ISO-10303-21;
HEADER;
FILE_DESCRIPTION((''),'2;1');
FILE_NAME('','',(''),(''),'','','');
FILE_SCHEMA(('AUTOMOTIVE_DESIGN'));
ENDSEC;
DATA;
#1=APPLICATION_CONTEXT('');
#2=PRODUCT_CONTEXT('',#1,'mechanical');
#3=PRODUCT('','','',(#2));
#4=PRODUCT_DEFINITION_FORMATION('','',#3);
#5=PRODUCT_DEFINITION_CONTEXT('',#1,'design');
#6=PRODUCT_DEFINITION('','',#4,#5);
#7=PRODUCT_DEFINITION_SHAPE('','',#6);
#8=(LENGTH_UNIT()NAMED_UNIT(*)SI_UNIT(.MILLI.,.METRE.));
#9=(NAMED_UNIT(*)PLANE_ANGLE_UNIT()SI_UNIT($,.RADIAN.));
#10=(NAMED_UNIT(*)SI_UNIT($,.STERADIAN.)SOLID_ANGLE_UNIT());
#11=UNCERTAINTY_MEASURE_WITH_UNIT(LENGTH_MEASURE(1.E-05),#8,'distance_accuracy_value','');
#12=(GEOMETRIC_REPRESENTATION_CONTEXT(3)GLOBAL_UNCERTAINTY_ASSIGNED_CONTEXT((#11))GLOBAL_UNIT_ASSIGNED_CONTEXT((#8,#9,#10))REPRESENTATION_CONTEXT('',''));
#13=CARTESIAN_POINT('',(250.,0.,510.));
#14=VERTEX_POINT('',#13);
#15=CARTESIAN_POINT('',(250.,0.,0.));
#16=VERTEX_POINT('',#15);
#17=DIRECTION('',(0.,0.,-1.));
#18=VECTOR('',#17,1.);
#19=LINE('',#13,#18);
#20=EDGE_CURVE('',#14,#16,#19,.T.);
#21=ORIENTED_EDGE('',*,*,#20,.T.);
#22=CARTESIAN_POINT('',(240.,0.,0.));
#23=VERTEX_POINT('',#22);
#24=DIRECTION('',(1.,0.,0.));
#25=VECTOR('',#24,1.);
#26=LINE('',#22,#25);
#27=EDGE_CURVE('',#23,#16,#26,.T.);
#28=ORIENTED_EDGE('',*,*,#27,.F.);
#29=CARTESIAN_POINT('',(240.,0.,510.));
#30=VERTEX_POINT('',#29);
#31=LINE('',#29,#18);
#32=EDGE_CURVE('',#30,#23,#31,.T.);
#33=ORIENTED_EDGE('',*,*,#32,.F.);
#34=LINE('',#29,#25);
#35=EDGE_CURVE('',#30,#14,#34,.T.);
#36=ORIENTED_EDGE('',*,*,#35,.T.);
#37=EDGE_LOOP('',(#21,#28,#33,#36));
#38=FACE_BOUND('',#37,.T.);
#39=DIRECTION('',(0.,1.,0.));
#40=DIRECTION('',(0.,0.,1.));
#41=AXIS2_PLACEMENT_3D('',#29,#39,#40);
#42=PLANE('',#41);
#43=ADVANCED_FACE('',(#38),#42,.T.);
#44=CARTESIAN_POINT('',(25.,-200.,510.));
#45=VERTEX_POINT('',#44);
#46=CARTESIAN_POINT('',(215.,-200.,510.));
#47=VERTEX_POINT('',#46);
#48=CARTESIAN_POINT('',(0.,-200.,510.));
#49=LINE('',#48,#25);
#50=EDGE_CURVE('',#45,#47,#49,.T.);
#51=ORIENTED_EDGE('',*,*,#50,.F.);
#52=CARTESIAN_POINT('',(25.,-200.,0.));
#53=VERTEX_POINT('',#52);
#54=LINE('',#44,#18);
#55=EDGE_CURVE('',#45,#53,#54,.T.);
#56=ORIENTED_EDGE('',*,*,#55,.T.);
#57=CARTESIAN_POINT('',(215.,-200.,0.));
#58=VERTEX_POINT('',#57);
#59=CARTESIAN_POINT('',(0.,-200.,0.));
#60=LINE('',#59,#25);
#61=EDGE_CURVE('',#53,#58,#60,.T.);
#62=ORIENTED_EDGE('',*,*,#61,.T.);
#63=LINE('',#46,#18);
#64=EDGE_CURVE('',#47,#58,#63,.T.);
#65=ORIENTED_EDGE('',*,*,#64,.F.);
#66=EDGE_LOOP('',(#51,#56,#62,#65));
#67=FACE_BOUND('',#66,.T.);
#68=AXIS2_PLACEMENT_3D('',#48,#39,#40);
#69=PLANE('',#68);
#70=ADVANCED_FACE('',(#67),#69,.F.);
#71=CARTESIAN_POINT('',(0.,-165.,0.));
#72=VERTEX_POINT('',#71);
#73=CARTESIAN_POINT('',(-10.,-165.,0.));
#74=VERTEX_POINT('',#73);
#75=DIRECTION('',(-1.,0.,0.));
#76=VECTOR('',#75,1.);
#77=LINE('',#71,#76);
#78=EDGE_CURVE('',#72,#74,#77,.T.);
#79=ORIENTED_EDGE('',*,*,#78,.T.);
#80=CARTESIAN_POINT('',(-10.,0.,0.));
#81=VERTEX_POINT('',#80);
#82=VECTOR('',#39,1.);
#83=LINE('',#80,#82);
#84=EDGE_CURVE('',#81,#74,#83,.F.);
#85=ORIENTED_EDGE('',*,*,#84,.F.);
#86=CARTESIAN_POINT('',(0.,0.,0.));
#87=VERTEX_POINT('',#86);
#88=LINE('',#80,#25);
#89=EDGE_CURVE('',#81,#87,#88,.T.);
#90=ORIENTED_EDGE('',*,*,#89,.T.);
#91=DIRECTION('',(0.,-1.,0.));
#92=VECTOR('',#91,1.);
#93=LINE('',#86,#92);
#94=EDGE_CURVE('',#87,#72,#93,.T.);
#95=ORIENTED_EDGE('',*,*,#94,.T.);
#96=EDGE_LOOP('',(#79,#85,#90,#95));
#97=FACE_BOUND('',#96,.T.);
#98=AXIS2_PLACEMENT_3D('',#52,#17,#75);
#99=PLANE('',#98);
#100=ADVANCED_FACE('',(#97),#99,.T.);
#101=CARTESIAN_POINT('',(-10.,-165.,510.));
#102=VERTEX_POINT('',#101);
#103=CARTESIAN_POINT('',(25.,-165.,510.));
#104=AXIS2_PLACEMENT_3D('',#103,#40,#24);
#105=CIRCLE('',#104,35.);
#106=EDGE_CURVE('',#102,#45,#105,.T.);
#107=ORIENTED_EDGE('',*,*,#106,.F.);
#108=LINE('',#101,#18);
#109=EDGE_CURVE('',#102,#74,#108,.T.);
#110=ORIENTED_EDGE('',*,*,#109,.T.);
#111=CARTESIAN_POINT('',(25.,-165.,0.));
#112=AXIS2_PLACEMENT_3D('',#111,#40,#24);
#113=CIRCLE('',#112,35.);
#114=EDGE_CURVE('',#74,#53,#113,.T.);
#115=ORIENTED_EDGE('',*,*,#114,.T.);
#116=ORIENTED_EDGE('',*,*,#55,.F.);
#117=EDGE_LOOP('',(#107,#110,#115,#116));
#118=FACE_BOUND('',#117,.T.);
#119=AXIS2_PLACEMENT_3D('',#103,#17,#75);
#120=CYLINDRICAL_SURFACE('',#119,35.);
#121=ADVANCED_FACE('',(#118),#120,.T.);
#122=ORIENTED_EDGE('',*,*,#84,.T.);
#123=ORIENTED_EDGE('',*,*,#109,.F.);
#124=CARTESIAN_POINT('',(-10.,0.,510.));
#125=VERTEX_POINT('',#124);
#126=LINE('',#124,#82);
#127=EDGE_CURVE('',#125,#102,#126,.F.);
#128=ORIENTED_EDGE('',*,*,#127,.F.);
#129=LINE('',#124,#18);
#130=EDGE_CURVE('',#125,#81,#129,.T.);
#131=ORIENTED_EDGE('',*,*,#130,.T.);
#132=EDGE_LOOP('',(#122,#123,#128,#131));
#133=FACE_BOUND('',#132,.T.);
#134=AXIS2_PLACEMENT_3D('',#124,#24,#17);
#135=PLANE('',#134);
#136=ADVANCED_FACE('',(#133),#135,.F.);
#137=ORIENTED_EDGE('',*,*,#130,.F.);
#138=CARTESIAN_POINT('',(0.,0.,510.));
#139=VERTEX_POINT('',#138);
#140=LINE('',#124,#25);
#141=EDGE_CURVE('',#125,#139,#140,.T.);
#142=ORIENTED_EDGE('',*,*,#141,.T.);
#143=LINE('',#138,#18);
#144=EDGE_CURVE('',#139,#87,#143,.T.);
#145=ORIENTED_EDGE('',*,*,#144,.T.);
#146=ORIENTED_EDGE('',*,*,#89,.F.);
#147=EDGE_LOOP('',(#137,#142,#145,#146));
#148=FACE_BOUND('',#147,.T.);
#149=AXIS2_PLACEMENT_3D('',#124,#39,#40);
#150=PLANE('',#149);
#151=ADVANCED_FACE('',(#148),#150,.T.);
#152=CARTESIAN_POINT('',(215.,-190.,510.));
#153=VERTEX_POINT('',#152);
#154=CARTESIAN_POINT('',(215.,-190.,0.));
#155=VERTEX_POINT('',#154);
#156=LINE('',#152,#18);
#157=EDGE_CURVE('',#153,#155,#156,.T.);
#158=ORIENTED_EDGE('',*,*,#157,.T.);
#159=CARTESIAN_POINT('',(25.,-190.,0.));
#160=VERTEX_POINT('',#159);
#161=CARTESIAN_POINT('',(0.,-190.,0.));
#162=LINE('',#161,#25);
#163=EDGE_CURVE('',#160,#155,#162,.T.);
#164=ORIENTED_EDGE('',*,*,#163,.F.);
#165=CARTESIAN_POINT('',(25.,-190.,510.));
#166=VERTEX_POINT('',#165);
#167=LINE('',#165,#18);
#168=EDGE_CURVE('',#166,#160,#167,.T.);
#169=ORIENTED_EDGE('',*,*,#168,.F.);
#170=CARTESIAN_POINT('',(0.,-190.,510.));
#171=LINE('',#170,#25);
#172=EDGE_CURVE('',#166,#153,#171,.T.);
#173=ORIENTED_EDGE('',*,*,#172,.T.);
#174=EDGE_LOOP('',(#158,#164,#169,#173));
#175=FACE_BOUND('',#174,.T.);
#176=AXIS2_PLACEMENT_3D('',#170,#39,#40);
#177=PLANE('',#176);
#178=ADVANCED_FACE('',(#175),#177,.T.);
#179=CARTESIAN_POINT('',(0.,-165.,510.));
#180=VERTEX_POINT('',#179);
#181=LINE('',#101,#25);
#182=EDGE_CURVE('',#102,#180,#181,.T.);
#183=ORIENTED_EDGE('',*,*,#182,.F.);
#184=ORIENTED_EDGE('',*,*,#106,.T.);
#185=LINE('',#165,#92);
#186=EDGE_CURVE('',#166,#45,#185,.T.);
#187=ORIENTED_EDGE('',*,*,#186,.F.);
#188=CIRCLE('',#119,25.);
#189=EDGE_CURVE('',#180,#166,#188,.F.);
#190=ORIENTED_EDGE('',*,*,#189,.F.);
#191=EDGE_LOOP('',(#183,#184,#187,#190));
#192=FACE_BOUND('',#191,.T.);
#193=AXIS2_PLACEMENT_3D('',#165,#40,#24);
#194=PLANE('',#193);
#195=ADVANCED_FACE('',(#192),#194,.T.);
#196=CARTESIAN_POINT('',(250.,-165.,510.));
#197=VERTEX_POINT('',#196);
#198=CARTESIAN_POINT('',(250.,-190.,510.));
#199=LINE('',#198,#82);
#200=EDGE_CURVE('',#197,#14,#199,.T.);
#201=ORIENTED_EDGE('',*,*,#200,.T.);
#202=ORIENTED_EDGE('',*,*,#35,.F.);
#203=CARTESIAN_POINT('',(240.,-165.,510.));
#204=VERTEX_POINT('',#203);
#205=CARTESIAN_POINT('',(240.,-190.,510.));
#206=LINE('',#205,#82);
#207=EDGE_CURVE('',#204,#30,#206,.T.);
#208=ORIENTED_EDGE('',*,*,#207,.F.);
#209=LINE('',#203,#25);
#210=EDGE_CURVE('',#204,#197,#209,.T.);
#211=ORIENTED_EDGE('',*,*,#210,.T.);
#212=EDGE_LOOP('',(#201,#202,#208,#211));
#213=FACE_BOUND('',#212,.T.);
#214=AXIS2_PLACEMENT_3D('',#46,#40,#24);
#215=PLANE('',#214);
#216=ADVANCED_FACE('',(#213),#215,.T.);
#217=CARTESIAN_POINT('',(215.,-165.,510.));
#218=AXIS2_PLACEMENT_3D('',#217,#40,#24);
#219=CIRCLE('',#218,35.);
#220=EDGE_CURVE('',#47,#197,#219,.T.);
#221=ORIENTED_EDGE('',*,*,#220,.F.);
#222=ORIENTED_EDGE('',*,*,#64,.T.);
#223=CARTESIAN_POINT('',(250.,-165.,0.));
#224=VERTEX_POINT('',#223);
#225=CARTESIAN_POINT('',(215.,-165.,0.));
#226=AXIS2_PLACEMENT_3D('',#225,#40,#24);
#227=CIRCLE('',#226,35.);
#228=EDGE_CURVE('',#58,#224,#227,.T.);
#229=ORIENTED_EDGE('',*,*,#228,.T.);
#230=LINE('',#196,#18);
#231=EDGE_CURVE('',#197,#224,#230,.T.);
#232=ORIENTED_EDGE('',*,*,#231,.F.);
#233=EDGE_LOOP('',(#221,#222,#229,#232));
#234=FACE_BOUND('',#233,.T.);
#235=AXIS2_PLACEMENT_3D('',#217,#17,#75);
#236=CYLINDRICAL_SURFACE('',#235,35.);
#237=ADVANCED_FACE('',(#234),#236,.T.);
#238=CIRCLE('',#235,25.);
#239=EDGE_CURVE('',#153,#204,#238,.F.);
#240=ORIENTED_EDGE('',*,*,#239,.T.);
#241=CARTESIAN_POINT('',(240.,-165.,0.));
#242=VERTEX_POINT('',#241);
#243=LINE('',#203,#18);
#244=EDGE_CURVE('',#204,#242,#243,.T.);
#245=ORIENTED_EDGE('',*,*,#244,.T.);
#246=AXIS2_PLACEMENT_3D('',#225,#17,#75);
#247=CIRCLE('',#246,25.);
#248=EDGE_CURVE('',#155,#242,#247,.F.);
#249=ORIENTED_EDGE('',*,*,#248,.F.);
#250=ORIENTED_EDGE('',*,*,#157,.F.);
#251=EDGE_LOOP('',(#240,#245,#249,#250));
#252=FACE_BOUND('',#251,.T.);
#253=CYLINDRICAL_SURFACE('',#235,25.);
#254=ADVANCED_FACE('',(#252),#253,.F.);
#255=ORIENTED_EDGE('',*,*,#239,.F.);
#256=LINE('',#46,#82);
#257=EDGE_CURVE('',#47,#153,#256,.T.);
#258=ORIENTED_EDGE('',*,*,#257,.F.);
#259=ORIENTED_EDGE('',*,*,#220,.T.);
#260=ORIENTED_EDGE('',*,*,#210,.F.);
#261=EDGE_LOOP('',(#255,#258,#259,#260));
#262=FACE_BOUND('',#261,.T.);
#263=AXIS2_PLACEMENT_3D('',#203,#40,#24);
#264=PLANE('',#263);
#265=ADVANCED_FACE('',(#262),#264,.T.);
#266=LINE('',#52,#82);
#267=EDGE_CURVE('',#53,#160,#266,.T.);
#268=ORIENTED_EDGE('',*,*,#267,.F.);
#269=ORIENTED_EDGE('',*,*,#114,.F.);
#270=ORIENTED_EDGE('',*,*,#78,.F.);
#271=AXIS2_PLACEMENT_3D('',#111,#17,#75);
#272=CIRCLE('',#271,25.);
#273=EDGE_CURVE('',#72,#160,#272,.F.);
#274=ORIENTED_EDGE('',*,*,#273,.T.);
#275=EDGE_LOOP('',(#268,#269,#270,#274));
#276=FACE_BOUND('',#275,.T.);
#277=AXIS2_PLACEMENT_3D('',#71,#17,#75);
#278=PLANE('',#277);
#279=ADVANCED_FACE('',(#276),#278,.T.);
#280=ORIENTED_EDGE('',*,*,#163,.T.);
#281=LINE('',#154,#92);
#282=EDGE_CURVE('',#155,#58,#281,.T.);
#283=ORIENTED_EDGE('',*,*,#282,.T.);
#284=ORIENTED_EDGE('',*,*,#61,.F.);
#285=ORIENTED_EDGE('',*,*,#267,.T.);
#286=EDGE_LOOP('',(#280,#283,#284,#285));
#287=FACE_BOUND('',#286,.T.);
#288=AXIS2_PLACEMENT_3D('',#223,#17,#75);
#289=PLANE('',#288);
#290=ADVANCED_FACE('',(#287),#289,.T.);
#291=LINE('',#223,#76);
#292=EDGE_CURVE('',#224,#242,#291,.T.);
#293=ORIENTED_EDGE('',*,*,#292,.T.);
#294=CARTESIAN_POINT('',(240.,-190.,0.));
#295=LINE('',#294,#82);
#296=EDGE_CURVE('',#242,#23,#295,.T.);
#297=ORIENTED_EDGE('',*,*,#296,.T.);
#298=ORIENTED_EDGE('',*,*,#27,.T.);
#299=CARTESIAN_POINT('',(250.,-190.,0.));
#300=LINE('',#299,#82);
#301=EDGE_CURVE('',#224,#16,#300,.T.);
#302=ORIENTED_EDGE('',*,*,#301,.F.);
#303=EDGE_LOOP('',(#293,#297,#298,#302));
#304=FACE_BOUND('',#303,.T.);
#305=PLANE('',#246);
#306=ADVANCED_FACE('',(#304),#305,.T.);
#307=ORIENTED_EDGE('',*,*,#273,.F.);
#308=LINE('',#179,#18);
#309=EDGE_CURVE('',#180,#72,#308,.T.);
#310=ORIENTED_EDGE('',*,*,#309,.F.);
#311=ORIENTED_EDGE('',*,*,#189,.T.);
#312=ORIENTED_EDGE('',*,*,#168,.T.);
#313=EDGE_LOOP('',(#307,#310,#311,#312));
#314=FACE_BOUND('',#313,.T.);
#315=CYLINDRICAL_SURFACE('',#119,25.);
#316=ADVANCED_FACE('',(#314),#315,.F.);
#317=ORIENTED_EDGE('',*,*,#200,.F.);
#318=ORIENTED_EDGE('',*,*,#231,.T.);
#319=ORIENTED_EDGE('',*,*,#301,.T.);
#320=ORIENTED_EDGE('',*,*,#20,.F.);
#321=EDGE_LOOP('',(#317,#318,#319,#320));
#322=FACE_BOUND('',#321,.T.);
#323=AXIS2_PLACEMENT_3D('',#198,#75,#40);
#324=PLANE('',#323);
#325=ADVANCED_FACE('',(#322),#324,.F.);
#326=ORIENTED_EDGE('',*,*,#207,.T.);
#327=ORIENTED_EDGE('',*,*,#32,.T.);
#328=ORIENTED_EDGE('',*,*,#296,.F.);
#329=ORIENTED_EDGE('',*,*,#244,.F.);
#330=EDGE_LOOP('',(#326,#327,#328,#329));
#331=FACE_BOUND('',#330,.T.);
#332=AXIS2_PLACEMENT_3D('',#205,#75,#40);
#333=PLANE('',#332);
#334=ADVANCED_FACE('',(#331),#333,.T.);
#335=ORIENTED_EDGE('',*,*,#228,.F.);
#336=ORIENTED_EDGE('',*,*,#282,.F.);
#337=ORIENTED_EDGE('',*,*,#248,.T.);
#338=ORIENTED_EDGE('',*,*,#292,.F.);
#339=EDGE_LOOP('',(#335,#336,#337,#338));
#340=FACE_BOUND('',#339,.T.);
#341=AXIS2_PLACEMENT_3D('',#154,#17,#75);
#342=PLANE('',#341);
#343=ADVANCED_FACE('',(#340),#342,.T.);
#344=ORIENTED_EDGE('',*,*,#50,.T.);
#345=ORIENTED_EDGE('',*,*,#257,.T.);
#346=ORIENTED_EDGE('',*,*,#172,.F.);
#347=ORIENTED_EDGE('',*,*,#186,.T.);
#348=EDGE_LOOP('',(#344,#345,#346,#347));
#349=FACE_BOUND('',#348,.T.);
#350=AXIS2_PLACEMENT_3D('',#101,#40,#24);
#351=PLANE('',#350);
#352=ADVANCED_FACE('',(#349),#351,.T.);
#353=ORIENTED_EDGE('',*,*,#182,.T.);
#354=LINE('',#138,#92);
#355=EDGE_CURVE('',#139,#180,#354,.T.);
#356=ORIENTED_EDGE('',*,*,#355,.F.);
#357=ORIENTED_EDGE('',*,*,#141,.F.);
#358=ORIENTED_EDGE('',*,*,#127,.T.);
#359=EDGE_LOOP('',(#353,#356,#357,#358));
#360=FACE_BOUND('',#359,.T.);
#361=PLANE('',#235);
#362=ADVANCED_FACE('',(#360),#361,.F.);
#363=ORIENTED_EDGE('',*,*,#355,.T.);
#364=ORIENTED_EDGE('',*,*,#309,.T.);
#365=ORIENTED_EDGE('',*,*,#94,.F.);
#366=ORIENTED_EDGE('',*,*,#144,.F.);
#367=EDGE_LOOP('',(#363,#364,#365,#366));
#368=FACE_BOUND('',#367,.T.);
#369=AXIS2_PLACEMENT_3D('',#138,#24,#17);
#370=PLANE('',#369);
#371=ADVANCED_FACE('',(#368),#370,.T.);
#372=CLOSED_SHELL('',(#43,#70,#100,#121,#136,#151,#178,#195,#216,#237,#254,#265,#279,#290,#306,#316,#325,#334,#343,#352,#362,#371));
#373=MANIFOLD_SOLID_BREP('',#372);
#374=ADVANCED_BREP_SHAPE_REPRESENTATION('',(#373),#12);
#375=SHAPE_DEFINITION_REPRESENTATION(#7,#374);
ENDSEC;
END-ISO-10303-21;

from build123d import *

# Parameters (mm, degrees)
TABAN_FLAN_1_DEPTH = 510


# Sheet-metal steps are written as plain solids
with BuildPart() as part:
    # Çizim1 → Taban-Flanş1 (new body)
    with BuildSketch(Plane.XY):
        with BuildLine():
            Line((0, 0), (0, -165))
            ThreePointArc((0, -165), (7.32233047, -182.67766953), (25, -190))
            Line((25, -190), (215, -190))
            ThreePointArc((215, -190), (232.67766953, -182.67766953), (240, -165))
            Line((240, -165), (240, 0))
            Line((240, 0), (250, 0))
            Line((250, 0), (250, -165))
            ThreePointArc((250, -165), (239.748737342, -189.748737342), (215, -200))
            Line((215, -200), (25, -200))
            ThreePointArc((25, -200), (0.251262658, -189.748737342), (-10, -165))
            Line((-10, -165), (-10, 0))
            Line((-10, 0), (0, 0))
        make_face()
    extrude(amount=TABAN_FLAN_1_DEPTH)


solid = part.part
